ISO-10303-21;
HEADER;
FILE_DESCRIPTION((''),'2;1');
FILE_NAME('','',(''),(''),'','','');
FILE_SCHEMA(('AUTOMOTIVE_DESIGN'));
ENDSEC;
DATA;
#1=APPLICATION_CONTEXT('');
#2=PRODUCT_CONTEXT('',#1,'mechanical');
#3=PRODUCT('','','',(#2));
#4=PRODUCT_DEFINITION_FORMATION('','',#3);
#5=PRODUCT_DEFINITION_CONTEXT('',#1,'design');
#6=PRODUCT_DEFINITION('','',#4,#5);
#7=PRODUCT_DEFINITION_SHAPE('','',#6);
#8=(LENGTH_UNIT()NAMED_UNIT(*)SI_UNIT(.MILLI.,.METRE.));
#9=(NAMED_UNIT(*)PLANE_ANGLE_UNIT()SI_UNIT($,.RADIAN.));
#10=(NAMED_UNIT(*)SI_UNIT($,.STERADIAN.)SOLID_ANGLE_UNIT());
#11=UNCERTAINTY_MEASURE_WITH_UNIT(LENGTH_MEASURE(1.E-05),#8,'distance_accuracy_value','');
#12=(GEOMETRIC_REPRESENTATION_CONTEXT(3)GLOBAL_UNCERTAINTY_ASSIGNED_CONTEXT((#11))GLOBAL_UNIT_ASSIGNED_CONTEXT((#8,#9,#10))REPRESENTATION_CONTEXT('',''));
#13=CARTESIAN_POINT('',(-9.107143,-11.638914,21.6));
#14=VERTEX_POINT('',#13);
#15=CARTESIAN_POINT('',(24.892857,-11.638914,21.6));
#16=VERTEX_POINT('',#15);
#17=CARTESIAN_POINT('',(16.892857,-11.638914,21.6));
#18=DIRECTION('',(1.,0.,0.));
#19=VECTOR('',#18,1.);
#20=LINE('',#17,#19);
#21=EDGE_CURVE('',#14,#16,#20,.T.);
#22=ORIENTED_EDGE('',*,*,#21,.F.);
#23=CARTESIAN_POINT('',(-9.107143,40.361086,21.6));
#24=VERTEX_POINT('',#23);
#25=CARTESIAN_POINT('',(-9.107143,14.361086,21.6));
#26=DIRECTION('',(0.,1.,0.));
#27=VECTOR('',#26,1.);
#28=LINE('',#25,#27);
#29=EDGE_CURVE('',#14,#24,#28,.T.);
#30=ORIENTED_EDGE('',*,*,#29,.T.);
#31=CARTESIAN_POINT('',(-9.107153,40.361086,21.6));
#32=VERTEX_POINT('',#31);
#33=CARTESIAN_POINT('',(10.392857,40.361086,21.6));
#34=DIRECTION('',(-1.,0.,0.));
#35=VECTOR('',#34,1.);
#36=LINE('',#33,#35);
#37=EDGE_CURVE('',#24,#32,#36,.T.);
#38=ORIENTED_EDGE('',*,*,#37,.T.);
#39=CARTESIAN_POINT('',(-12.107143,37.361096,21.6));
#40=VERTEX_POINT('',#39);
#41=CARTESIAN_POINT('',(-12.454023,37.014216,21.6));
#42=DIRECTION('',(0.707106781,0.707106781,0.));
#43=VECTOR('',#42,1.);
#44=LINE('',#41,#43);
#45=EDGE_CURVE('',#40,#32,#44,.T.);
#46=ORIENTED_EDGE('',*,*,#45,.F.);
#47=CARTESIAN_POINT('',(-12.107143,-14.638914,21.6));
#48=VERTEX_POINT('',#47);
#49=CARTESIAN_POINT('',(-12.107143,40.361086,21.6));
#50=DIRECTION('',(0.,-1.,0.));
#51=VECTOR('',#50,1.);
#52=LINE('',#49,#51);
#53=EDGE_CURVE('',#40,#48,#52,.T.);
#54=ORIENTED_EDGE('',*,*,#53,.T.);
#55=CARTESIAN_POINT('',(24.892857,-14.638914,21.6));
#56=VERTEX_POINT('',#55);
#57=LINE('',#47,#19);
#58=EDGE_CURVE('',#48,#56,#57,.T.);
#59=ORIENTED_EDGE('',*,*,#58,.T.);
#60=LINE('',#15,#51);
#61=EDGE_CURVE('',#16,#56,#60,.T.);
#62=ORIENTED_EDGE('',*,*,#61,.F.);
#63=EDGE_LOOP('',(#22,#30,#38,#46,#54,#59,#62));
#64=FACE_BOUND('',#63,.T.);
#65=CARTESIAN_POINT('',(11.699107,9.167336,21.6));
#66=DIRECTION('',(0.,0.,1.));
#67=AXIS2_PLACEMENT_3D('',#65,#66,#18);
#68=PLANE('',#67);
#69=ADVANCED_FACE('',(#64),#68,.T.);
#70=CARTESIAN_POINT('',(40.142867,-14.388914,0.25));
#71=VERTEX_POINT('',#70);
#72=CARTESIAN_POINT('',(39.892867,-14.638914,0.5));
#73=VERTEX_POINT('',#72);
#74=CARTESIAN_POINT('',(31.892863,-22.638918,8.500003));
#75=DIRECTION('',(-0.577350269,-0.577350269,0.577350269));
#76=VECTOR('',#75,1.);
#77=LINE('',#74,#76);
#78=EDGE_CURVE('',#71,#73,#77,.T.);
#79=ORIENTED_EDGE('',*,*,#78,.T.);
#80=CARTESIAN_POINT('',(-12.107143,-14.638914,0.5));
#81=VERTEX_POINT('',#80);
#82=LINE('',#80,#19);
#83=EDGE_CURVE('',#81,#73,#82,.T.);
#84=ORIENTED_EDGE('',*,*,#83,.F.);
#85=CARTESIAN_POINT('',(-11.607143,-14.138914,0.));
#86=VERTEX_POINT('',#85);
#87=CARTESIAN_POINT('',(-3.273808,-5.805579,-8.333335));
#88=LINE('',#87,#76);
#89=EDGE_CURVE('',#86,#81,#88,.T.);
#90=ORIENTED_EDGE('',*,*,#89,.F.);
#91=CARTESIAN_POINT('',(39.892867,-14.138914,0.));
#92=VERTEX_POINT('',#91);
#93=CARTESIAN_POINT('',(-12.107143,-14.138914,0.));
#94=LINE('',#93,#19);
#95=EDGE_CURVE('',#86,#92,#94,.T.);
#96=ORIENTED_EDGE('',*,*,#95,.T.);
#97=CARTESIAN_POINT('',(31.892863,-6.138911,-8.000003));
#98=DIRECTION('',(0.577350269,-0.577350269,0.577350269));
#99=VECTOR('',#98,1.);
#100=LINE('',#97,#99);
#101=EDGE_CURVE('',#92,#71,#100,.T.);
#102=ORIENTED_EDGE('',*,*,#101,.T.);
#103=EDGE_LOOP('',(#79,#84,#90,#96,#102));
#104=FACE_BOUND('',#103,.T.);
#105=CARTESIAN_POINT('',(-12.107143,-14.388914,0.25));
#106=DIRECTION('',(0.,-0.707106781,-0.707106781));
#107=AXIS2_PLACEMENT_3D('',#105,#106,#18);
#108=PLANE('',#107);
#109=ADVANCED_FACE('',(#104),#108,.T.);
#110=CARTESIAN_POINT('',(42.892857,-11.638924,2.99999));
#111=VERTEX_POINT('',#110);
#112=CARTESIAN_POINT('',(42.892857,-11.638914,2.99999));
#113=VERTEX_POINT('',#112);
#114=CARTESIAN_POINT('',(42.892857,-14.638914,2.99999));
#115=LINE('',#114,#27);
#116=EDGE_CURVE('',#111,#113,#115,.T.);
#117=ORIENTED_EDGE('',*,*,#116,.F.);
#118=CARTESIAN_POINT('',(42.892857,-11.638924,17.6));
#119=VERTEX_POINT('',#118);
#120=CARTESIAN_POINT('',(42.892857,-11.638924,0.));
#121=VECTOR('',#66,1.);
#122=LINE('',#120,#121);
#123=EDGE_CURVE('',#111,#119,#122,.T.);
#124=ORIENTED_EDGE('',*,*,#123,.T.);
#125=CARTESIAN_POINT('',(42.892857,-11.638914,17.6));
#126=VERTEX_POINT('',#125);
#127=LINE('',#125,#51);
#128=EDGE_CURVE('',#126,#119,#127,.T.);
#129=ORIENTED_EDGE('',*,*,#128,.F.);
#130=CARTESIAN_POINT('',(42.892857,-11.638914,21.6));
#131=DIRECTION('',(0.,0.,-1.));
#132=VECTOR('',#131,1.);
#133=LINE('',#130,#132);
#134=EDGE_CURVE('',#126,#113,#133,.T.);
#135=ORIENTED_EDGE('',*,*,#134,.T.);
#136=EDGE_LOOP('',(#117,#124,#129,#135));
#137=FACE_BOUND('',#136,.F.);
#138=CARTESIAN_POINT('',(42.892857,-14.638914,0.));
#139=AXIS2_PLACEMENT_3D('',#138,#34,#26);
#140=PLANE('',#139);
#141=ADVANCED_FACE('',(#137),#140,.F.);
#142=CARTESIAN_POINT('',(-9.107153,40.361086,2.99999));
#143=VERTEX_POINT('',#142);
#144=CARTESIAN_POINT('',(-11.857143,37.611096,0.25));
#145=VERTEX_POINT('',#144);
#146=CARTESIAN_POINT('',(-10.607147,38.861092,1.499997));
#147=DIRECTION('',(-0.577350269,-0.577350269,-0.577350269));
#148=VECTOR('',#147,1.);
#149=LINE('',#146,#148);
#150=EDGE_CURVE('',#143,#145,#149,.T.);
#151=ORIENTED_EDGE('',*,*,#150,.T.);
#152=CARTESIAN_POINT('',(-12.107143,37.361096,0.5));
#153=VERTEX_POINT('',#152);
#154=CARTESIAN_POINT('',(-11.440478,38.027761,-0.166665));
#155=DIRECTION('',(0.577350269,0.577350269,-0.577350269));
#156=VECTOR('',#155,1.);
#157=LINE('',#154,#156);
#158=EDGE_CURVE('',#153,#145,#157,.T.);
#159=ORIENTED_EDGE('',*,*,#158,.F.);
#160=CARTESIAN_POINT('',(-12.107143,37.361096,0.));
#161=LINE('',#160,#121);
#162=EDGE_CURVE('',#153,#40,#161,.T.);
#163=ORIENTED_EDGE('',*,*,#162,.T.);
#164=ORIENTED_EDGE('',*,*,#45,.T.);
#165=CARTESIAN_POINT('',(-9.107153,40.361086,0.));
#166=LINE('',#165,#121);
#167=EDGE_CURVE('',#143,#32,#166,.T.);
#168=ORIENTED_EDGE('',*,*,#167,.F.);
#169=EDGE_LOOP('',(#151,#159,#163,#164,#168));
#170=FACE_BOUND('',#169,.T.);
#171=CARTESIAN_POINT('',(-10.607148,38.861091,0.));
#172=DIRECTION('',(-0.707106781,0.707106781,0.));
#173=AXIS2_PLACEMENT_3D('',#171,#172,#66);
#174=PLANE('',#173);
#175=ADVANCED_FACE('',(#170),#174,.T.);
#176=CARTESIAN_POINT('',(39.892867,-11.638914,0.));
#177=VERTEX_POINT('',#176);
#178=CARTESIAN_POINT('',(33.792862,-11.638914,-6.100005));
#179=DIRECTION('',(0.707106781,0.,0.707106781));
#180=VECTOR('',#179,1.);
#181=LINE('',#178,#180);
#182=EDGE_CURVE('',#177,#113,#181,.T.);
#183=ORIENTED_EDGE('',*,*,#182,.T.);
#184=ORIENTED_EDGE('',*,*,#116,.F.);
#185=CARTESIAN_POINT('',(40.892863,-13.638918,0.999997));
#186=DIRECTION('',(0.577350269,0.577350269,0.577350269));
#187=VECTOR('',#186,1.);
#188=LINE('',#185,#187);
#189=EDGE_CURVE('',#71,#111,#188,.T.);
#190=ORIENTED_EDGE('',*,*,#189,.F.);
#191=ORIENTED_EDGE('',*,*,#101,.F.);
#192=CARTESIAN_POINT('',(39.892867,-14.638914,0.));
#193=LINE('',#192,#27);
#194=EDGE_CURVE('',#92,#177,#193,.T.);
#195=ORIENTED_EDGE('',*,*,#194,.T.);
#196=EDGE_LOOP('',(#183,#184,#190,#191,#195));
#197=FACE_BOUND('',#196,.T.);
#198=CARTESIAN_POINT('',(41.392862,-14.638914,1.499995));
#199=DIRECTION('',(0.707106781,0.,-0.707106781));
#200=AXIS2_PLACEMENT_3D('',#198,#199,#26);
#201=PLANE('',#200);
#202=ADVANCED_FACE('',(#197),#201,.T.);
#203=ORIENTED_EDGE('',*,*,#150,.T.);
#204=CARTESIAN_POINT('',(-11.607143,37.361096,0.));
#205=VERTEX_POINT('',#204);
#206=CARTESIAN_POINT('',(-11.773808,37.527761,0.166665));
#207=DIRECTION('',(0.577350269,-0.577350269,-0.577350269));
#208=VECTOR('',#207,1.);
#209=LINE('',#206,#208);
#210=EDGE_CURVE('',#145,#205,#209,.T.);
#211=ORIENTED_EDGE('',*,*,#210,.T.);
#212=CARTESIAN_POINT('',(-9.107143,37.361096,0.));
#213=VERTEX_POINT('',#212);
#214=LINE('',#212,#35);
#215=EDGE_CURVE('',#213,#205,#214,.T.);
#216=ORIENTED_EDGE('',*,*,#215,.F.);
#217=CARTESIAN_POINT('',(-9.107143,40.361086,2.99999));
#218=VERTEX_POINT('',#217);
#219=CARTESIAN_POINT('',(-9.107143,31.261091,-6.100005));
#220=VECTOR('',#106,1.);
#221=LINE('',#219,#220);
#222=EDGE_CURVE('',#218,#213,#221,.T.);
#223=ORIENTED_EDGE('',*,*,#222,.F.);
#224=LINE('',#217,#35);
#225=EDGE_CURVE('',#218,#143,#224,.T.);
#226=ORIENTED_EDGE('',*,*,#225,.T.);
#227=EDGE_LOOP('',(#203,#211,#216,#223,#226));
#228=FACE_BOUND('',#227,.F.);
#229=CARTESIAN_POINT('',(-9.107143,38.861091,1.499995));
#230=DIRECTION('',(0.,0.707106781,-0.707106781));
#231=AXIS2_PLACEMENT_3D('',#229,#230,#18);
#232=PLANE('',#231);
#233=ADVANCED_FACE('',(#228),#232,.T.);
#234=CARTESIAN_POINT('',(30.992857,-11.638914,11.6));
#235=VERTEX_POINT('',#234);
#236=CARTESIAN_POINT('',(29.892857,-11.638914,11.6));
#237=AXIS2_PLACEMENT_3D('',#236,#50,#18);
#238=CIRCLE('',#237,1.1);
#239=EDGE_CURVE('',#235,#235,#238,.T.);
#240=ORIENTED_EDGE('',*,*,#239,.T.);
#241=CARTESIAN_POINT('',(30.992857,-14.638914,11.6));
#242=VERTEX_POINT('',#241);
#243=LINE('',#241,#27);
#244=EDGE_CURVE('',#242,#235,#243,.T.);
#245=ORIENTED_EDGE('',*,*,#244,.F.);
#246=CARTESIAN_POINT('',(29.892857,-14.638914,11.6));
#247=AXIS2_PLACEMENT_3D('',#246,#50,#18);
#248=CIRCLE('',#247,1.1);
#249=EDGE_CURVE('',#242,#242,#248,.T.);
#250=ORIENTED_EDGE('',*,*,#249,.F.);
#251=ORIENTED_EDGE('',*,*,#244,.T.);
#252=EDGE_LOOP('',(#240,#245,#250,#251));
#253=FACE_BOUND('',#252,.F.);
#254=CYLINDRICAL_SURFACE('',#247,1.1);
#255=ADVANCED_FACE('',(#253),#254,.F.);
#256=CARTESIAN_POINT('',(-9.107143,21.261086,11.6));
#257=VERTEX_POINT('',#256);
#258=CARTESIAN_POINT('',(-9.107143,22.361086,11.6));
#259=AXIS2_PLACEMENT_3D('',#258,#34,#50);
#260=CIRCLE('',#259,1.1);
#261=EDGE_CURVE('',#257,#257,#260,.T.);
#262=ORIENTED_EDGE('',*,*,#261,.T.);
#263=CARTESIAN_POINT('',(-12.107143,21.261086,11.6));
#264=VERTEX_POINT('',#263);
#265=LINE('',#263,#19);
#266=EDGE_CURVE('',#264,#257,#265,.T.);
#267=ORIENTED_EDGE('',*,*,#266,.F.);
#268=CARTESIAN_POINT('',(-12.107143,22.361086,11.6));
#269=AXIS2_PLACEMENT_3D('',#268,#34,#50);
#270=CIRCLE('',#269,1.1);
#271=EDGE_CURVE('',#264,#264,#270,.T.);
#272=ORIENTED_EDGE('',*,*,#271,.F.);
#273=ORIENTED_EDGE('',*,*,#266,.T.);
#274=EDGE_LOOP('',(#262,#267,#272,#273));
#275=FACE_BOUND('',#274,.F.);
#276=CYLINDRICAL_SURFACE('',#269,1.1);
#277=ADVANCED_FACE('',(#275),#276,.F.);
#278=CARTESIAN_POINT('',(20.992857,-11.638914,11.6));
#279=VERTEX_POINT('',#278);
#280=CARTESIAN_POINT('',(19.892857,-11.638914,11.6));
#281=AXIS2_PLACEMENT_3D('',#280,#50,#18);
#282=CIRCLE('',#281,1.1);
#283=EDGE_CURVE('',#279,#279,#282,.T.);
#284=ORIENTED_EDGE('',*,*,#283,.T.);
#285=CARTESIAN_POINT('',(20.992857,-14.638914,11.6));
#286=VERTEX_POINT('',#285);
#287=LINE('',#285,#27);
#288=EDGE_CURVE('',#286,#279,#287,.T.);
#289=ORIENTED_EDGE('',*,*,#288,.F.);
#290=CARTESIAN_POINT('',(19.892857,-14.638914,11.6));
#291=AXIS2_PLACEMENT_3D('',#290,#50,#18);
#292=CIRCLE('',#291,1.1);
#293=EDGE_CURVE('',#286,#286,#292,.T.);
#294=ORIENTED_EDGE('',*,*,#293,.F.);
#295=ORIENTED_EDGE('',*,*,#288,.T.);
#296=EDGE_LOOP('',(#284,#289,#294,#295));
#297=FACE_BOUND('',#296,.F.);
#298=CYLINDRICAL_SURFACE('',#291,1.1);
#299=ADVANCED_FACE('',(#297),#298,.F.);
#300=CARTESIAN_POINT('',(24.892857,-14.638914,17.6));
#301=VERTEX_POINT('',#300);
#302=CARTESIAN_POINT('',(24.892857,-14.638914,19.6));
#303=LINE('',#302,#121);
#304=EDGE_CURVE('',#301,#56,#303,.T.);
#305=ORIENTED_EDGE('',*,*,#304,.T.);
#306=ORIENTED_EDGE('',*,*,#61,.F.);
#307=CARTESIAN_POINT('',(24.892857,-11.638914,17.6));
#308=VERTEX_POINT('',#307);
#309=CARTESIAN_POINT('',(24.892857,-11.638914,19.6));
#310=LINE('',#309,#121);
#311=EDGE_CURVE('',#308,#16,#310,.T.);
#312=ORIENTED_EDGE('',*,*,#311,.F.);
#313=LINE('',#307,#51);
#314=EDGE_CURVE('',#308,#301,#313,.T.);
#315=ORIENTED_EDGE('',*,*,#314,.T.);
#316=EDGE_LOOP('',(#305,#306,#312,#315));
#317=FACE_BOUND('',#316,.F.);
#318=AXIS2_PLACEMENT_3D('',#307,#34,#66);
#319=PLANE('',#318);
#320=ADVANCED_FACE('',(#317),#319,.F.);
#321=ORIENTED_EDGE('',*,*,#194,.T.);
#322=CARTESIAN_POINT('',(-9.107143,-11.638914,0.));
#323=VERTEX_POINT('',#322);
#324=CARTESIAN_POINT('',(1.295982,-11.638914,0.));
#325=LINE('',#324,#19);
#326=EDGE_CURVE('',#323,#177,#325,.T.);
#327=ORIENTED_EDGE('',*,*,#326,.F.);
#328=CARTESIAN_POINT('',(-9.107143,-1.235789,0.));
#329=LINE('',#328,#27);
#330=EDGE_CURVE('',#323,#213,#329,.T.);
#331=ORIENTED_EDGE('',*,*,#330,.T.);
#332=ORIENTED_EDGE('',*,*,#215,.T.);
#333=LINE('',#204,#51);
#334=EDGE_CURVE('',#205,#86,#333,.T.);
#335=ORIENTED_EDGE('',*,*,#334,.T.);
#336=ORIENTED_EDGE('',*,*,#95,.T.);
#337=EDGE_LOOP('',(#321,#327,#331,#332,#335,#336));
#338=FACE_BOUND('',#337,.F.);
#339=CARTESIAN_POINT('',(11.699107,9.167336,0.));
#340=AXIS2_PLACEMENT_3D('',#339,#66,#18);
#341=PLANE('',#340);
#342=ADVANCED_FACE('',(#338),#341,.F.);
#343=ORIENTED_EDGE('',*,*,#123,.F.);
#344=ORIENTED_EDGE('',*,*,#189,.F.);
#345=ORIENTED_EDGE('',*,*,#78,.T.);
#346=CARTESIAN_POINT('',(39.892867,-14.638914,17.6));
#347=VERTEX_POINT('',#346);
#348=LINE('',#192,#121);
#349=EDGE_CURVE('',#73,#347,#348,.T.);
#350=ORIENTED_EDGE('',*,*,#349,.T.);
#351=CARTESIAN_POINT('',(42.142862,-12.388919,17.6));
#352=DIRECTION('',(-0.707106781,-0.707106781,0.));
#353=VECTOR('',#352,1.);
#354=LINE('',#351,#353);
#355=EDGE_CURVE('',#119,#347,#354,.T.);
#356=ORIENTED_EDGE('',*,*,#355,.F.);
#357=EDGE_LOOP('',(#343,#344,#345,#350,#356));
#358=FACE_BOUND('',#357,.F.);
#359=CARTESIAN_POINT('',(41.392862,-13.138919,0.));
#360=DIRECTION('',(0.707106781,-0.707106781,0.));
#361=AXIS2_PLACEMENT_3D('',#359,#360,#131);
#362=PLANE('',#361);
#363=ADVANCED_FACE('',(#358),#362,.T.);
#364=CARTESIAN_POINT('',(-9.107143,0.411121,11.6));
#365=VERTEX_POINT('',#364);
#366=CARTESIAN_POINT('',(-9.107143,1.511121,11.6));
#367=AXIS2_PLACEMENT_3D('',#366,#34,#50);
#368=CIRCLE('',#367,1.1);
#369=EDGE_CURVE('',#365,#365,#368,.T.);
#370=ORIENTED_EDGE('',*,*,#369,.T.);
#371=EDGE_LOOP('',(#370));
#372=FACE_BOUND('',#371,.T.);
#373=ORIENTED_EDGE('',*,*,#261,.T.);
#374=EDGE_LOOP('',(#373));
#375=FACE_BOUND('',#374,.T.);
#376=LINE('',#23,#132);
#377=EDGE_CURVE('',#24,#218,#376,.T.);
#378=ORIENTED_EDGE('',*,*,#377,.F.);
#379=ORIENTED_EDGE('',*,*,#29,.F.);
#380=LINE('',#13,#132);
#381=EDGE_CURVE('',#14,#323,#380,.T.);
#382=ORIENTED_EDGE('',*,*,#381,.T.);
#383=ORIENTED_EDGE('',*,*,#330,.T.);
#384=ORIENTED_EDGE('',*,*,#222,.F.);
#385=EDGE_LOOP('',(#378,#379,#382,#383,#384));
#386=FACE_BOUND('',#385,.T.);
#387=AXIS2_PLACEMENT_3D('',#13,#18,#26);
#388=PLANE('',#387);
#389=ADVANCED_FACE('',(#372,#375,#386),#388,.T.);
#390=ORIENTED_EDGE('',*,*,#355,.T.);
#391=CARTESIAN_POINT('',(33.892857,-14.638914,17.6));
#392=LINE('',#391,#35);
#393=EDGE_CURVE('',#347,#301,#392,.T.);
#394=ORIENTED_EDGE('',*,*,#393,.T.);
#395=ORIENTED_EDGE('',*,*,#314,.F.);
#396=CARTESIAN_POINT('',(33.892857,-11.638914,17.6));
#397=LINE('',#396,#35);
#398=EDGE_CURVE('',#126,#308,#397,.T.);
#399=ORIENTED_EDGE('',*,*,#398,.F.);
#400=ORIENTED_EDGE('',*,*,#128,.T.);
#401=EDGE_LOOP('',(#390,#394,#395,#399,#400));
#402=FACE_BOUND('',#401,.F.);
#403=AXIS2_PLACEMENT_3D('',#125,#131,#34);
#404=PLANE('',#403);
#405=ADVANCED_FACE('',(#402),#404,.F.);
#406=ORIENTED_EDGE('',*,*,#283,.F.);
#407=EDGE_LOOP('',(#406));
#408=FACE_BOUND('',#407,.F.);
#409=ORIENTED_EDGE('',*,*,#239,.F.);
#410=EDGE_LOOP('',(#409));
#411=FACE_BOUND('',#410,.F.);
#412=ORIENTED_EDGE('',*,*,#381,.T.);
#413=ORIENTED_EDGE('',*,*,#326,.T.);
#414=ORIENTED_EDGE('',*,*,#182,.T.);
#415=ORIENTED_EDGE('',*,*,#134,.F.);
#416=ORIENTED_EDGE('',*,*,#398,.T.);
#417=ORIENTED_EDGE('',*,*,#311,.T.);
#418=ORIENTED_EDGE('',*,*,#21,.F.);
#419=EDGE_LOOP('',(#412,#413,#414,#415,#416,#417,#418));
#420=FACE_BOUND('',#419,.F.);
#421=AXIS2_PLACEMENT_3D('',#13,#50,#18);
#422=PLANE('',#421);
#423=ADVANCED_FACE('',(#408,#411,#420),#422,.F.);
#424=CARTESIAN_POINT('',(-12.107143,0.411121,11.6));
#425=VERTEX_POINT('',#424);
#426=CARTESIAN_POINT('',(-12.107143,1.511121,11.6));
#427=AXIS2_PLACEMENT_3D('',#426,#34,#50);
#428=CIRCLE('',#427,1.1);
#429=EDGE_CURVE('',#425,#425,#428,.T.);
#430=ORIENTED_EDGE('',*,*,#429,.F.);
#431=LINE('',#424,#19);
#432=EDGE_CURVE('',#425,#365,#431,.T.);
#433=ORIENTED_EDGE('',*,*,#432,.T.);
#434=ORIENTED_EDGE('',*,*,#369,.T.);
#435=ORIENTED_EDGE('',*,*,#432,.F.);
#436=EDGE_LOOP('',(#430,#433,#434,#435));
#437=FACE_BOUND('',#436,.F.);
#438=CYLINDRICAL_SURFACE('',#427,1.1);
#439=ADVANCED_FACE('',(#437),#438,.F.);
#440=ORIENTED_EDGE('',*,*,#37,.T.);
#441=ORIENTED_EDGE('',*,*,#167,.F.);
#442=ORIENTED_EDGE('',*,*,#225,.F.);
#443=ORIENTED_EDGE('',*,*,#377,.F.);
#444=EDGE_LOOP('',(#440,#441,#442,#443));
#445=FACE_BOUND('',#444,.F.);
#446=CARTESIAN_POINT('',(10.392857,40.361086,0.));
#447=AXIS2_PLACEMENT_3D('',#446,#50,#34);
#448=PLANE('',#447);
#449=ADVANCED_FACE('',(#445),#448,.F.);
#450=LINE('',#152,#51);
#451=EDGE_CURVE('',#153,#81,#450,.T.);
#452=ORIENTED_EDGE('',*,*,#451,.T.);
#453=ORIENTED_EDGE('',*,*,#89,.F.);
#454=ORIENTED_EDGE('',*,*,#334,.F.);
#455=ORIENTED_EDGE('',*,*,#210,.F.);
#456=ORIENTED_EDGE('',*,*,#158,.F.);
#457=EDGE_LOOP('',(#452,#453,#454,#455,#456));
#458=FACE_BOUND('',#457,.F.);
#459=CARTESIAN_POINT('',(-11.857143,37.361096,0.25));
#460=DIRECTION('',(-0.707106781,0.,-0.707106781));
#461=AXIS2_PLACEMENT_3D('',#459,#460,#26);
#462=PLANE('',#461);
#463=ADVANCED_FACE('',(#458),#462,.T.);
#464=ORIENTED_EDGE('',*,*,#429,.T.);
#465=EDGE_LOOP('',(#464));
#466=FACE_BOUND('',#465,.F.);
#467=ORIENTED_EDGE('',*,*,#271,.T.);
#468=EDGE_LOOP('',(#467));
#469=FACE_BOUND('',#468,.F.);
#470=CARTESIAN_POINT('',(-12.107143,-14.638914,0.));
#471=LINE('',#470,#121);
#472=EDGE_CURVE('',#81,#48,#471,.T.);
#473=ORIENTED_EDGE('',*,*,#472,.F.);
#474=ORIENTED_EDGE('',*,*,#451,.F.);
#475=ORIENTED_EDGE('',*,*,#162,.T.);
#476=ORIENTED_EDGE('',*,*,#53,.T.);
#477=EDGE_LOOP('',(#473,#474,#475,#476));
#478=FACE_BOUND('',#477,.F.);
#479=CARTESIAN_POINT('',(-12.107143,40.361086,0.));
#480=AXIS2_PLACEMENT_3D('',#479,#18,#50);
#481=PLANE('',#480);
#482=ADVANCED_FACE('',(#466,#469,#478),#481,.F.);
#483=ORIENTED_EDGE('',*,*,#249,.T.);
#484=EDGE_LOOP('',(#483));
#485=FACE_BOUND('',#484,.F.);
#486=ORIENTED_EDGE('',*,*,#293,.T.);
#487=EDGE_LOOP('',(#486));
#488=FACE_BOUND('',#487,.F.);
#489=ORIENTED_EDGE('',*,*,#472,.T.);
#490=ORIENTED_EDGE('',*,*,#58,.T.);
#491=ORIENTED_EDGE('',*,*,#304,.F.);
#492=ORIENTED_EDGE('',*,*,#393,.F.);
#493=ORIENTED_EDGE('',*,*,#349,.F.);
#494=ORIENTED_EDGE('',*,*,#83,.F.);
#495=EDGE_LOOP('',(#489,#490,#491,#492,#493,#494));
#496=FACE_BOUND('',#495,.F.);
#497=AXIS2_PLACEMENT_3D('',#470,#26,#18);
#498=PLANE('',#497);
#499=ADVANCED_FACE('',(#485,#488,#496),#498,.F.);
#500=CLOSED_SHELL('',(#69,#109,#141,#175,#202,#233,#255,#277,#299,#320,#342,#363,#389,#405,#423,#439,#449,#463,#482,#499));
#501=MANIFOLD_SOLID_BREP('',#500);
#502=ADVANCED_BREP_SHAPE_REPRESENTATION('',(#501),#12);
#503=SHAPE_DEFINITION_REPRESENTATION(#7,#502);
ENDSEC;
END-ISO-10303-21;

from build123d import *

# Parameters (mm, degrees)
F1_DEPTH  = 21.6
F2_W      = 52
F2_H      = 52
F3_DEPTH  = 22
F4_SIZE   = 2.99999
F5_SIZE   = 0.5
F6_R      = 1.1
F7_DEPTH  = 3
F8_R      = 1.1
F9_DEPTH  = 3
F10_W     = 18
F10_H     = 4
F11_DEPTH = 3


# Not quite as in the source:
# - a fillet or chamfer is up to 0.001 mm smaller than in the source, because OpenCascade refuses the exact size


with BuildPart() as f1:
    # F0 (on Top) → F1 (new body)
    with BuildSketch(Plane.XY):
        Polygon((-12.1071431786, 40.3610856729), (-12.1071431786, -14.6389143271), (42.8928568214, -14.6389143271), (42.8928568214, 7.8610856729), (10.3928568214, 40.3610856729), align=None)
    extrude(amount=F1_DEPTH)

    # F2 (on face) → F3 (cut)
    with BuildSketch(Plane.XY.offset(21.6)):
        with Locations((16.8928568214, 14.3610856729)):
            Rectangle(F2_W, F2_H)
    extrude(amount=-F3_DEPTH, mode=Mode.SUBTRACT)

    # F4 (size 3 in the source; OpenCascade refuses exactly that, so slightly less here)
    f4_edges = [f1.edges().sort_by_distance(p)[0] for p in [
        (42.892857, -13.138914, 0),
        (-10.607143, 40.361086, 0),
        (-12.107143, 40.361086, 10.8),
        (42.892857, -14.638914, 10.8),
    ]]
    chamfer(f4_edges, length=F4_SIZE)

    # F5
    f5_edges = [f1.edges().sort_by_distance(p)[0] for p in [
        (13.892862, -14.638914, 0),
        (-12.107143, 11.361091, 0),
    ]]
    chamfer(f5_edges, length=F5_SIZE)

    # F6 (on face) → F7 (cut)
    with BuildSketch(Plane.XZ.offset(14.6389143271)):
        with Locations((29.8928568214, 11.6)):
            Circle(F6_R)
        with Locations((19.8928568214, 11.6)):
            Circle(F6_R)
    extrude(amount=-F7_DEPTH, mode=Mode.SUBTRACT)

    # F8 (on face) → F9 (cut)
    with BuildSketch(Plane(origin=(-12.1071431786, 0, 0), x_dir=(0, -1, 0), z_dir=(-1, 0, 0))):
        with Locations((-22.3610856729, 11.6)):
            Circle(F8_R)
        with Locations((-1.5111208195, 11.6)):
            Circle(F8_R)
    extrude(amount=-F9_DEPTH, mode=Mode.SUBTRACT)

    # F10 (on face) → F11 (cut)
    with BuildSketch(Plane(origin=(0, -11.6389143271, 0), x_dir=(-1, 0, 0), z_dir=(0, 1, 0))):
        with Locations((-33.8928568214, 19.6)):
            Rectangle(F10_W, F10_H)
    extrude(amount=-F11_DEPTH, mode=Mode.SUBTRACT)


solid = f1.part
